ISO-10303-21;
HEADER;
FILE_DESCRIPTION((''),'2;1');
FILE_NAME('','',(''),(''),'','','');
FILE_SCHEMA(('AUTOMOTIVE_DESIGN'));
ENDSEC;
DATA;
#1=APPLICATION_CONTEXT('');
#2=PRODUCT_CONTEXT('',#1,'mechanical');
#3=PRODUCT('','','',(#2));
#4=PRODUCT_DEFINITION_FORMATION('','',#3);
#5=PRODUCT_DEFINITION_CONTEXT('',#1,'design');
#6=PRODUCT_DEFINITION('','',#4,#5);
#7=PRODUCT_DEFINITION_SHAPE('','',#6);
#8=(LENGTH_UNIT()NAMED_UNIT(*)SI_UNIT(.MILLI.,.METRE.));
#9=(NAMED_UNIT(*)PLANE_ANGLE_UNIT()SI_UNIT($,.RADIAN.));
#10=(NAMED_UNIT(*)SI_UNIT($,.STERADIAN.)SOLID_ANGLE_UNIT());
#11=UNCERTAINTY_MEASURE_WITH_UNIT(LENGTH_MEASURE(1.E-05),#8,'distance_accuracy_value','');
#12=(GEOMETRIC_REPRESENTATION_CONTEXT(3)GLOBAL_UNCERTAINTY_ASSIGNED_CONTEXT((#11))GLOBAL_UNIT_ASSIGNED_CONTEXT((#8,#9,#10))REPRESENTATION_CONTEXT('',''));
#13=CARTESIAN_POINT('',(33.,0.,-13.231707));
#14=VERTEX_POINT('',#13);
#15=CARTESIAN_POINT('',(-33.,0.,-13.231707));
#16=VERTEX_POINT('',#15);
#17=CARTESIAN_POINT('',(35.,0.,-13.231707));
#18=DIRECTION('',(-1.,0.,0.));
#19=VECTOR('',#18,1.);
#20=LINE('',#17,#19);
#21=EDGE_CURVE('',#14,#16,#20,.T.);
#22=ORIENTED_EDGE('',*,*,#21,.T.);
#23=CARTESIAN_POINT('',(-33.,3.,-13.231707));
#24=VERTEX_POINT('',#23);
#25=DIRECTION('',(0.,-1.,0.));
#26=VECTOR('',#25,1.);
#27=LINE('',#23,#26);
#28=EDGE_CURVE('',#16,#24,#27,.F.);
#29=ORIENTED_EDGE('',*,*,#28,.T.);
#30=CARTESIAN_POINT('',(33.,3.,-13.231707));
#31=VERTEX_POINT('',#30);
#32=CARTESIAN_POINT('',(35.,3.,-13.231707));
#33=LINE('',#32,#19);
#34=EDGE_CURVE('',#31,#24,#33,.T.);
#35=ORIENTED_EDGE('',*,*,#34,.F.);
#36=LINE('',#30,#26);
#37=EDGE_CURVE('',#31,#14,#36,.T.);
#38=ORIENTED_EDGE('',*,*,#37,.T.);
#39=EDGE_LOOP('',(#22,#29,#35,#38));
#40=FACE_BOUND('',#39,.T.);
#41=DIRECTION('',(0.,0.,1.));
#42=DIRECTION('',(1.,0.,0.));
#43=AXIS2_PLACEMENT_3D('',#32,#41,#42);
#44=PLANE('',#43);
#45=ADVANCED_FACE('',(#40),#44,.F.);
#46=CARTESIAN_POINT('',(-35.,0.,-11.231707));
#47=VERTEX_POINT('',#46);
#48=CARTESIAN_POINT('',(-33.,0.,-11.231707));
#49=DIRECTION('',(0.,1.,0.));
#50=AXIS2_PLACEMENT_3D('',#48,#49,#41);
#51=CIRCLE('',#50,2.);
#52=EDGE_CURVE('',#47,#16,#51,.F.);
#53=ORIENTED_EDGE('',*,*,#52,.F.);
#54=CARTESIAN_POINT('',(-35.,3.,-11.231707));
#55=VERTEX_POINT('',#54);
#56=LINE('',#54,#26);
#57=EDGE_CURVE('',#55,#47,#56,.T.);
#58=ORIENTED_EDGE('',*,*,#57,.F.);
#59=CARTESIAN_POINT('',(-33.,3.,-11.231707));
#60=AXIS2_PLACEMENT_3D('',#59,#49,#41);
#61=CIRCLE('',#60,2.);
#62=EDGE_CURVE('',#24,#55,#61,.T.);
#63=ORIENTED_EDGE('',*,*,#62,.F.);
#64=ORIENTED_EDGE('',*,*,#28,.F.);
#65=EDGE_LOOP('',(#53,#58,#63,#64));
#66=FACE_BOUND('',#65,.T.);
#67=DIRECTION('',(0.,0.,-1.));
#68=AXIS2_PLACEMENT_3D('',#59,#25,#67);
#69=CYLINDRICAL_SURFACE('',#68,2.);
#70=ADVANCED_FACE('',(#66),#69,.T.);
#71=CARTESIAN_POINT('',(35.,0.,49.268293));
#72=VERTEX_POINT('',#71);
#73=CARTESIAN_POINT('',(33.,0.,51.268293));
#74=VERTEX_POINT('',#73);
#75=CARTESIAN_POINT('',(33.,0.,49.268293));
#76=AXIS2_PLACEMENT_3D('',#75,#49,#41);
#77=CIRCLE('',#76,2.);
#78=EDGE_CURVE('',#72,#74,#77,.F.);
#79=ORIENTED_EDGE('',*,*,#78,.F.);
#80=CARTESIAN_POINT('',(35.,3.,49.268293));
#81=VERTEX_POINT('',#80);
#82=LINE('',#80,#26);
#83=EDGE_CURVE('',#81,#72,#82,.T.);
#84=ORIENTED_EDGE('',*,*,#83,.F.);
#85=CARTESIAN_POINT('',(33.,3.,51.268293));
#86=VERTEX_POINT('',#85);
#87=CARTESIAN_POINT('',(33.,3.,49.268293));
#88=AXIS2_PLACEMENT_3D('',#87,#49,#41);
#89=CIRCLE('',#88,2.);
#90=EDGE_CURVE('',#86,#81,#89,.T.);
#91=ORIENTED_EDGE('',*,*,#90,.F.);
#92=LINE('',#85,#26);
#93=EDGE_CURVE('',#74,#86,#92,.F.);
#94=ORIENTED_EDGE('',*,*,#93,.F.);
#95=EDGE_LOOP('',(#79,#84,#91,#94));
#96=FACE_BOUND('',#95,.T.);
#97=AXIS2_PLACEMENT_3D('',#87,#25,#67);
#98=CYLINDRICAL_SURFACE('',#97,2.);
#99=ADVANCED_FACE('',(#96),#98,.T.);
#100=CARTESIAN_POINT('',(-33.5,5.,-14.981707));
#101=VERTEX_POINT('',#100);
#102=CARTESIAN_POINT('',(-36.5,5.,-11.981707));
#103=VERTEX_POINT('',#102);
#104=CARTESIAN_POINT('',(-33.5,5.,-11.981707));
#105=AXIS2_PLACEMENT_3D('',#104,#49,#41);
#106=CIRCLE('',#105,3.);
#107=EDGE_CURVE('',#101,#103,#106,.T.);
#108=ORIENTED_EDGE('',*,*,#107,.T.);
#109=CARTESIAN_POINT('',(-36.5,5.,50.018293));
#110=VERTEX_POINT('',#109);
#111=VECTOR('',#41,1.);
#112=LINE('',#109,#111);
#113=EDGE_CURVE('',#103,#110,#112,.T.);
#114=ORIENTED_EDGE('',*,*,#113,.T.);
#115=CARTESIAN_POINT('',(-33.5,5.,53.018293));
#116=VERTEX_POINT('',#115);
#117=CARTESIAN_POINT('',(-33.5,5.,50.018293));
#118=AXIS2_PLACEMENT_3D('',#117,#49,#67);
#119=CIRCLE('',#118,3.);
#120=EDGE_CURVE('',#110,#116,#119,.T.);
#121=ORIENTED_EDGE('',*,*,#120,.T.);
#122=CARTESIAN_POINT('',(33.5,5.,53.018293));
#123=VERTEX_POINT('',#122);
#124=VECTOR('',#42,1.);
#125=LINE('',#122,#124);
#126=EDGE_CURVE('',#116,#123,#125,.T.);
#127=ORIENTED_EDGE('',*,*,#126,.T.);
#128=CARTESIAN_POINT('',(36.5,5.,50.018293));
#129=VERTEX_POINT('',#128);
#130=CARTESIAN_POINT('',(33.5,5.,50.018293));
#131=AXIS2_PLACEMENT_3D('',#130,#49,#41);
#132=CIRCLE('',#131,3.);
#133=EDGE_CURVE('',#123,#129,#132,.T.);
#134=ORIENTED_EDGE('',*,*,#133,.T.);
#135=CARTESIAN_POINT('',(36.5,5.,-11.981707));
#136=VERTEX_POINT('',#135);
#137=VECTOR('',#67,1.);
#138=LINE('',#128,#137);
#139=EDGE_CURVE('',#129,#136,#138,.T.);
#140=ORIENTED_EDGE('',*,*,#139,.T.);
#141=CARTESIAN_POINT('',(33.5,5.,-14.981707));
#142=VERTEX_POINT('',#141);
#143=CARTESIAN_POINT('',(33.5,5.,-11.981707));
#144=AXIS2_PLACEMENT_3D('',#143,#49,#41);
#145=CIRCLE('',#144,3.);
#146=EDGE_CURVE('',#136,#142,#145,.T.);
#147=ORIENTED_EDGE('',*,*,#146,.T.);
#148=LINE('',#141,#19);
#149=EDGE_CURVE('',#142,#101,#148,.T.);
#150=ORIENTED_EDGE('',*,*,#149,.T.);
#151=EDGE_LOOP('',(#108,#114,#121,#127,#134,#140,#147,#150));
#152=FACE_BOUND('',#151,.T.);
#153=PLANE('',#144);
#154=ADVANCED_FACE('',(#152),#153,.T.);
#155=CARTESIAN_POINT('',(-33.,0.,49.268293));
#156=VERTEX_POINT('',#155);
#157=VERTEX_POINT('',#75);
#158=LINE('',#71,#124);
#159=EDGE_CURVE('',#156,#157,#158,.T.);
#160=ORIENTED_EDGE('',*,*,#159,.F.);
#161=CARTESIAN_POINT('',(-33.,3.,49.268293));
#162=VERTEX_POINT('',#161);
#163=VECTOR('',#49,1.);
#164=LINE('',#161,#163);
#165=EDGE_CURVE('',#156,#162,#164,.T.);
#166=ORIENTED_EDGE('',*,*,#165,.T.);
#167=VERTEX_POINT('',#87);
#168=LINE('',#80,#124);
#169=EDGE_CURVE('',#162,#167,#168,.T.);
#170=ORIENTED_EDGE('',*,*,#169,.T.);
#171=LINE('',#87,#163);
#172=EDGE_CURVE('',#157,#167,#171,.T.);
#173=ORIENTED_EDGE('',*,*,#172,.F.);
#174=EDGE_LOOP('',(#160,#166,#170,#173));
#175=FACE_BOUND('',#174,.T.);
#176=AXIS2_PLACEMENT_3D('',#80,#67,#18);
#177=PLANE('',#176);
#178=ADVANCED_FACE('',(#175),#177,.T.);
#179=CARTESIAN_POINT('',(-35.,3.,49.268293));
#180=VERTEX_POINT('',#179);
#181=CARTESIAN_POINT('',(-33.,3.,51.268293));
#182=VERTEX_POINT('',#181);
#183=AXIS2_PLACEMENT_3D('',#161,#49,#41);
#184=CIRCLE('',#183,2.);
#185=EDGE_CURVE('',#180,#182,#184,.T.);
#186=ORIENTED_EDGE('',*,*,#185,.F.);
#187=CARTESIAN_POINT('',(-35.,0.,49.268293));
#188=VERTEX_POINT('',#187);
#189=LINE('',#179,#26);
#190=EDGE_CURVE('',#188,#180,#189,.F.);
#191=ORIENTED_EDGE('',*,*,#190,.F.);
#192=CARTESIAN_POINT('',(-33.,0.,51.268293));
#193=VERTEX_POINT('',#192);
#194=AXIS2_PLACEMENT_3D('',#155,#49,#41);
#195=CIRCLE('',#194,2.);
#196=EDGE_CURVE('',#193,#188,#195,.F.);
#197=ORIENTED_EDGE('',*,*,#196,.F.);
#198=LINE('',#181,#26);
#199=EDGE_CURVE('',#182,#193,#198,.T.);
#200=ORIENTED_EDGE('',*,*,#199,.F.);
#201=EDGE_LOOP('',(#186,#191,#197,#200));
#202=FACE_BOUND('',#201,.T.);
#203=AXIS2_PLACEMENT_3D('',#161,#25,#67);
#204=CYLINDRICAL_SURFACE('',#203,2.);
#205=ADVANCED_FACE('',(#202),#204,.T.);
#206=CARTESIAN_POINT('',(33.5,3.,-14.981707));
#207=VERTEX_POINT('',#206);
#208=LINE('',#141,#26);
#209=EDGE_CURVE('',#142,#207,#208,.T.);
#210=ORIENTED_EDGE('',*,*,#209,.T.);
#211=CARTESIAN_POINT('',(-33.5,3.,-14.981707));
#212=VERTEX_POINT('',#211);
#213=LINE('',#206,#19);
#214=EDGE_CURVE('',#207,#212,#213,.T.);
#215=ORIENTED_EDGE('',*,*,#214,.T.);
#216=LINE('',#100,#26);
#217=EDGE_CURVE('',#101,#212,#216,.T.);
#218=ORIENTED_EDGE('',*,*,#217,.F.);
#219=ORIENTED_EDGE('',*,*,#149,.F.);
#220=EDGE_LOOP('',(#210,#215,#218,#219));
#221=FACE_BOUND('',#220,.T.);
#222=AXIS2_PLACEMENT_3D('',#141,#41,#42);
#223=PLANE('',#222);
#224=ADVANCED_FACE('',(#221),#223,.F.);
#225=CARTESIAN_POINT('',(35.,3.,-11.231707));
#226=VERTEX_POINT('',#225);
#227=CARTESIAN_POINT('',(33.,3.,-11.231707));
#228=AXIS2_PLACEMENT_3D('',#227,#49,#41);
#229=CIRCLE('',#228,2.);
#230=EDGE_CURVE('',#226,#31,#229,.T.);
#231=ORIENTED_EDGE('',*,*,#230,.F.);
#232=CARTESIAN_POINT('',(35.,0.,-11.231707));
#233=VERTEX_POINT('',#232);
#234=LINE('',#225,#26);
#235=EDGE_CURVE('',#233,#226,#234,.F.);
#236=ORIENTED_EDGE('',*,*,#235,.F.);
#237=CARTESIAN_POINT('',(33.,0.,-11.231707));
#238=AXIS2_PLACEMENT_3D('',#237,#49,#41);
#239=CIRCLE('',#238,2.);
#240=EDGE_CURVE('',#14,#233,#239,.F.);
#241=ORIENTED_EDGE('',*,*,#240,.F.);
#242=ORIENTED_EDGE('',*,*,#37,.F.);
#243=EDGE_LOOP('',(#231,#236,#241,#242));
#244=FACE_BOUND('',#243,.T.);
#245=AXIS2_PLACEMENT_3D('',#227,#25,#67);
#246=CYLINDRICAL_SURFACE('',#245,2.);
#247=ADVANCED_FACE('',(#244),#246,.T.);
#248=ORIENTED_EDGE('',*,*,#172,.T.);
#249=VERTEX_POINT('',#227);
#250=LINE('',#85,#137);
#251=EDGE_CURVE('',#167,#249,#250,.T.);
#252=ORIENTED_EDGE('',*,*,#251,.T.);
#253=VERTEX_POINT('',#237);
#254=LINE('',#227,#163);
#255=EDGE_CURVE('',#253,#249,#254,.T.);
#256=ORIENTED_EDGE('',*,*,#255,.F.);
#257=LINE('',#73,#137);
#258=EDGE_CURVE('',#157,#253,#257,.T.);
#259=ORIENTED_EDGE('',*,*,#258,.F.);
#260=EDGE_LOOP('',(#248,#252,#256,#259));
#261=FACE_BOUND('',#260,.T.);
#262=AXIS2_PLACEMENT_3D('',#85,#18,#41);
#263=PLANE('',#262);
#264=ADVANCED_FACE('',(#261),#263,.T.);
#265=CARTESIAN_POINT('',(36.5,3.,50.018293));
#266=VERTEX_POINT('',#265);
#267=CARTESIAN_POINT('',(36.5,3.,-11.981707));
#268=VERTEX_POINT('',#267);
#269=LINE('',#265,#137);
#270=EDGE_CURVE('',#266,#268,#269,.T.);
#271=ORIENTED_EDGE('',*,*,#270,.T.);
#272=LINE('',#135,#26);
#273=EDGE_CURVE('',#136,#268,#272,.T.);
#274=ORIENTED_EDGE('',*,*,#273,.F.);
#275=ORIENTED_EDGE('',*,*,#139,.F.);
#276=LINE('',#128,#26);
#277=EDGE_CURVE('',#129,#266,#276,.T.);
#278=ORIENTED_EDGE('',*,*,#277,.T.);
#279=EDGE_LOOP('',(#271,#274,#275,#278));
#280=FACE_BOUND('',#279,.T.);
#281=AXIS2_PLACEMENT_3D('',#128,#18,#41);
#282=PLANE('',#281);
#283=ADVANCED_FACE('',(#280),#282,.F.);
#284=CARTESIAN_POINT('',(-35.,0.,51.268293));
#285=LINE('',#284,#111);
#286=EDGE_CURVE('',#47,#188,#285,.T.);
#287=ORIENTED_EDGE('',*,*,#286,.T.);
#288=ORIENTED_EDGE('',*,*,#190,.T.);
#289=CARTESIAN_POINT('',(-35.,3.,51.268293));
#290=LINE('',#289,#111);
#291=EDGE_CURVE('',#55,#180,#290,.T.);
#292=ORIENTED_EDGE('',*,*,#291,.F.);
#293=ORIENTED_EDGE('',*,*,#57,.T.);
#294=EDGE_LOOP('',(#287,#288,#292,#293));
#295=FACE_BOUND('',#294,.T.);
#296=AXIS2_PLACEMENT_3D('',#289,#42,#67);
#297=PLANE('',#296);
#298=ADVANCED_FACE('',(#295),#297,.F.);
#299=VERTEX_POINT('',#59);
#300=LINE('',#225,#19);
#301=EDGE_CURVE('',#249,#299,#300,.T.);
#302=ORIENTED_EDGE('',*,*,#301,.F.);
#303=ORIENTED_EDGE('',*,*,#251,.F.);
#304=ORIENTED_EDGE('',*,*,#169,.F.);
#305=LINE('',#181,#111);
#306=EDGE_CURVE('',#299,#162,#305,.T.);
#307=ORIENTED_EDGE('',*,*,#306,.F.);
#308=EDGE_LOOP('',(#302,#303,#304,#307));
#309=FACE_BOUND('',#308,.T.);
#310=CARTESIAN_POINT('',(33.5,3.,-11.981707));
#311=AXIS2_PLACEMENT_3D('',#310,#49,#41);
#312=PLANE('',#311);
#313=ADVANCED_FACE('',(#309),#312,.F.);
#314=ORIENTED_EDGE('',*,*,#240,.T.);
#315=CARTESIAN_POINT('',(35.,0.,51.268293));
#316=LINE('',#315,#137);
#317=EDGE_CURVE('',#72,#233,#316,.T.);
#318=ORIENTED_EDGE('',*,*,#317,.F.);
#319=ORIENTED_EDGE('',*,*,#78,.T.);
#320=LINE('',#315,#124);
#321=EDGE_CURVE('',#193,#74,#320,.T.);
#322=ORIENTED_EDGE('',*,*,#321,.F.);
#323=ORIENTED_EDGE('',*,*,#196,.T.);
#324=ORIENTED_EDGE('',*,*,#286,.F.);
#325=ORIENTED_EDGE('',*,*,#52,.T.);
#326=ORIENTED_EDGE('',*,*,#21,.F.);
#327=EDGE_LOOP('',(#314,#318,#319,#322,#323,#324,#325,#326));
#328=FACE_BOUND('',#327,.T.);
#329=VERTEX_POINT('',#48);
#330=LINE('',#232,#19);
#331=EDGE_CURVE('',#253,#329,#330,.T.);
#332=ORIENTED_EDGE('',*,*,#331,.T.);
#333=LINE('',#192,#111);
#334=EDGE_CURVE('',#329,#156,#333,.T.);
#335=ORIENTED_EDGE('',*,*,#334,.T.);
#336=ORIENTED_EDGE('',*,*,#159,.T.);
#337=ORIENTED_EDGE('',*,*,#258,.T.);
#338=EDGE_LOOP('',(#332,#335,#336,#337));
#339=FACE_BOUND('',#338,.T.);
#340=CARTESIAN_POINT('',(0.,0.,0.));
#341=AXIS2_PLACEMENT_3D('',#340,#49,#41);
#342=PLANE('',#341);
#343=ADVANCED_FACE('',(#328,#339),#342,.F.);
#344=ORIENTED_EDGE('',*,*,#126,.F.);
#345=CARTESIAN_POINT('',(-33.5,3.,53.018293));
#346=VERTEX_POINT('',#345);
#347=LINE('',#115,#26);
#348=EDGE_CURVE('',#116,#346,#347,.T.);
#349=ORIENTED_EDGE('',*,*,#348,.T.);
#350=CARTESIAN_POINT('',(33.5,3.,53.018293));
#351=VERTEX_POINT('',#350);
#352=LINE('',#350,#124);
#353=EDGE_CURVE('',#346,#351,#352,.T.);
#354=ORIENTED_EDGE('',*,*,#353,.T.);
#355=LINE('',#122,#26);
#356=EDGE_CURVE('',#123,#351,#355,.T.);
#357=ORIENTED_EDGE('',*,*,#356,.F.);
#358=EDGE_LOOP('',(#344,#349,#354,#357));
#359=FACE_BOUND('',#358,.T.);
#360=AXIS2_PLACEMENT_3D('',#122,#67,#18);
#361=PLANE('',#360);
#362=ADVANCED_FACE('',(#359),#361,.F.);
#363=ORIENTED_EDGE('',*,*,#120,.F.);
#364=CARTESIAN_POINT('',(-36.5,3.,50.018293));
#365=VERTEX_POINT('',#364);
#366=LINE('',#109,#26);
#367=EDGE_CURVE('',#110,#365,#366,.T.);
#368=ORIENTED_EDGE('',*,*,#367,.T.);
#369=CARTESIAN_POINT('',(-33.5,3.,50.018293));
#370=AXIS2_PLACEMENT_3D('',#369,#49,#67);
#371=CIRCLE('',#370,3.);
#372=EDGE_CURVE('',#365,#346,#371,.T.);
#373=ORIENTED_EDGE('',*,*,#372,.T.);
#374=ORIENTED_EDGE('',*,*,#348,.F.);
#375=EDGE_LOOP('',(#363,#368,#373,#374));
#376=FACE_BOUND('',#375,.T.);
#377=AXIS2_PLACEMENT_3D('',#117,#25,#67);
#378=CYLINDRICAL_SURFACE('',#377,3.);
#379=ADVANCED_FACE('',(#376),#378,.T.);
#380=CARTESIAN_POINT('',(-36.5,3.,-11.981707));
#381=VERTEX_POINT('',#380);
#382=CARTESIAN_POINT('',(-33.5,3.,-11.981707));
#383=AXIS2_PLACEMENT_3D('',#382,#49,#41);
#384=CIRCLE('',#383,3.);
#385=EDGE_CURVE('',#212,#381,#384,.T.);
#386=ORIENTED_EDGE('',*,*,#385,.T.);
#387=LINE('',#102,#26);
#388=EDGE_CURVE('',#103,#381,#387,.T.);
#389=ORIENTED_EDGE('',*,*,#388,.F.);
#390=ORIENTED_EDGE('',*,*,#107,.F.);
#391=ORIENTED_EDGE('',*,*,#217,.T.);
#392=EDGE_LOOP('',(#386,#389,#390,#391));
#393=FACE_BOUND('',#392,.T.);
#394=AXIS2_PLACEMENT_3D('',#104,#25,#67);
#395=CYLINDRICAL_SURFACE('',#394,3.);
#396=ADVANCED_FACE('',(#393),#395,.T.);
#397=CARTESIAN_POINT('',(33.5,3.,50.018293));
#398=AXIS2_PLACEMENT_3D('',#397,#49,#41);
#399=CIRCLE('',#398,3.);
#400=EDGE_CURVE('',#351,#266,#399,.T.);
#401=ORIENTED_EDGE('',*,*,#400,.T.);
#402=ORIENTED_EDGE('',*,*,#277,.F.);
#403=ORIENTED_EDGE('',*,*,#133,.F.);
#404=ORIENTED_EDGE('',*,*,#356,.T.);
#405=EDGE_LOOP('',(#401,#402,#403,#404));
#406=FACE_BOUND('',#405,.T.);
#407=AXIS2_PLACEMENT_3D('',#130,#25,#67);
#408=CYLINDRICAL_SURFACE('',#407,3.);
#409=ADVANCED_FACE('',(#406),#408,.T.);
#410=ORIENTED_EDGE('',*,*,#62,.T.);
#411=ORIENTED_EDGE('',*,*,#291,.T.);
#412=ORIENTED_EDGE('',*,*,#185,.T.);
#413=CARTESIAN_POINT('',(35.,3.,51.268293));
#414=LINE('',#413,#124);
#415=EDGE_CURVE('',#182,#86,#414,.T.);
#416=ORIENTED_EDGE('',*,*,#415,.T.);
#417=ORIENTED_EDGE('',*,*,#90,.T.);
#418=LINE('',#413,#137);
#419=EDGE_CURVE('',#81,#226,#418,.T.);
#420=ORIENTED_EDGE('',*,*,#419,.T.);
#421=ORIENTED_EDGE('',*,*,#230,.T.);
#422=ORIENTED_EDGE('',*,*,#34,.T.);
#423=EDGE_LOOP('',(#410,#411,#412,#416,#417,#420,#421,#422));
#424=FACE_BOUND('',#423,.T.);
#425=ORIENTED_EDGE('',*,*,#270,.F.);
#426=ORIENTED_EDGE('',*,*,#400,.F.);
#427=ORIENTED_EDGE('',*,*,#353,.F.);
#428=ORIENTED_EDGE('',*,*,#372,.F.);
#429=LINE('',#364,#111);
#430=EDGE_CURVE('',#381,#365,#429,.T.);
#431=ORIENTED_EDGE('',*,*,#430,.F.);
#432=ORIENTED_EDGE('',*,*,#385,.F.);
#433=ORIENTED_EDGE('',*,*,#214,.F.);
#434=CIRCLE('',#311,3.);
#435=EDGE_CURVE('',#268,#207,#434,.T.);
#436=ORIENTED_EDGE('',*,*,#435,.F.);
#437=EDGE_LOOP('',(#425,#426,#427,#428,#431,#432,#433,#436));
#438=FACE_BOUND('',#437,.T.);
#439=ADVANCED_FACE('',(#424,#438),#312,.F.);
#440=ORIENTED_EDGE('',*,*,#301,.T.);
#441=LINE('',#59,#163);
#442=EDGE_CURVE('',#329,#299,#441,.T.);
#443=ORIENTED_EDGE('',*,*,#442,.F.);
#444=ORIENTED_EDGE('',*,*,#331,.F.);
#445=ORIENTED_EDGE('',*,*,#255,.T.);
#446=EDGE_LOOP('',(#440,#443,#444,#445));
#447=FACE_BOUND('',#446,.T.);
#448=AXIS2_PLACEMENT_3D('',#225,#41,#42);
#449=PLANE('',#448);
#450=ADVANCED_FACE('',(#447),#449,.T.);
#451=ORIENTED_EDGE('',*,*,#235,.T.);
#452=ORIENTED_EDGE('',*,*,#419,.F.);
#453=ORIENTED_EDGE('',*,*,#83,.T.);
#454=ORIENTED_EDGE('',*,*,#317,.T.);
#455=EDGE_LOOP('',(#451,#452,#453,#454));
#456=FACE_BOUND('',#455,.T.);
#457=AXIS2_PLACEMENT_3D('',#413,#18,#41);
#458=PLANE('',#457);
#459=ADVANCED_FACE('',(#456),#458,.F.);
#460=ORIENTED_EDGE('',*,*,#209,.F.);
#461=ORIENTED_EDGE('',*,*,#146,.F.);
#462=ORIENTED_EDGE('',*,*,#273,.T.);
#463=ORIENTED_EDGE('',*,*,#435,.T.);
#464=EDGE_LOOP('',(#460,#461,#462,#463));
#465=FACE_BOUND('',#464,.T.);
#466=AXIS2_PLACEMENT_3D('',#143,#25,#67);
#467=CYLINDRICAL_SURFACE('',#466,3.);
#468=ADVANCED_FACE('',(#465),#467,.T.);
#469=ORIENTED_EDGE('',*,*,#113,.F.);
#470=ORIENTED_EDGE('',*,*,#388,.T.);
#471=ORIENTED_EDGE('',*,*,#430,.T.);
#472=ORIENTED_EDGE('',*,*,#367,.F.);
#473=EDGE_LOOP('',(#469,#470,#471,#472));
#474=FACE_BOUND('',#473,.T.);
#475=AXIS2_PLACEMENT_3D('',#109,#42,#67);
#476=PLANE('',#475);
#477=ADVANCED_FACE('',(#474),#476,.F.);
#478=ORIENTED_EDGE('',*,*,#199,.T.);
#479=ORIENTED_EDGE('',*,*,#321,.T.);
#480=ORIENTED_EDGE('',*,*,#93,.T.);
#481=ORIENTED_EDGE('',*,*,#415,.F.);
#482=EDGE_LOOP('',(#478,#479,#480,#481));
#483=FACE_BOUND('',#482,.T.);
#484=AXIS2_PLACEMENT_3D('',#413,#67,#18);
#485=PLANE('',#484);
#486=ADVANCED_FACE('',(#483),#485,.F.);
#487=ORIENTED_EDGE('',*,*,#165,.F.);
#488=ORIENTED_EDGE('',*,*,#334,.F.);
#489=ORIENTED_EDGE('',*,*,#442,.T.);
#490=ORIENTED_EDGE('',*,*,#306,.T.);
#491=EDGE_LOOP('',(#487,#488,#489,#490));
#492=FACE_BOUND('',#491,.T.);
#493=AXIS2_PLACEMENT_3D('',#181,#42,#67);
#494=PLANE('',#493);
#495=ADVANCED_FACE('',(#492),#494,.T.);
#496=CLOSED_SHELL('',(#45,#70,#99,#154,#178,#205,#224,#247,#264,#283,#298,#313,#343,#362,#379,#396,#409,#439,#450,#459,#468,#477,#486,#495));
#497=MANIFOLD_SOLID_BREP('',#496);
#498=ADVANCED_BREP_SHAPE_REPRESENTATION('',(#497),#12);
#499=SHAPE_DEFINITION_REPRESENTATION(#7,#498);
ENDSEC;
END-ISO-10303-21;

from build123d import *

# Parameters (mm, degrees)
CROQUIS1_W              = 70
CROQUIS1_H              = 64.5
SALIENTE_EXTRUIR1_DEPTH = 3
REDONDEO1_R             = 2
VACIADO2_START          = -33
VACIADO2_OUTLINE_W      = 3
VACIADO2_OUTLINE_H      = 60.5
VACIADO2_DEPTH          = 66
SALIENTE_EXTRUIR2_DEPTH = 2


# Read off the part's stored shape, not the designer's step: Vaciado2
with BuildPart() as part:
    # Croquis1 → Saliente-Extruir1 (new body)
    with BuildSketch(Plane(origin=(0, 0, 0), x_dir=(1, 0, 0), z_dir=(0, 1, 0))):
        with Locations((0, -19.018292683)):
            Rectangle(CROQUIS1_W, CROQUIS1_H)
    extrude(amount=SALIENTE_EXTRUIR1_DEPTH)

    # Redondeo1
    redondeo1_edges = [part.edges().sort_by_distance(p)[0] for p in [
        (-35, 1.5, -13.231707317),
        (35, 1.5, -13.231707317),
        (35, 1.5, 51.268292683),
        (-35, 1.5, 51.268292683),
    ]]
    fillet(redondeo1_edges, radius=REDONDEO1_R)

    # Vaciado2 outline → Vaciado2 (cut)
    with BuildSketch(Plane.YZ.offset(VACIADO2_START)):
        with Locations((1.5, 19.018292683)):
            Rectangle(VACIADO2_OUTLINE_W, VACIADO2_OUTLINE_H)
    extrude(amount=VACIADO2_DEPTH, mode=Mode.SUBTRACT)

    # Croquis4 → Saliente-Extruir2 (add)
    with BuildSketch(Plane(origin=(0, 3, 0), x_dir=(1, 0, 0), z_dir=(0, 1, 0))):
        with BuildLine():
            Line((33.5, -53.018292683), (-33.5, -53.018292683))
            ThreePointArc((-33.5, -53.018292683), (-35.621320344, -52.139613026), (-36.5, -50.018292683))
            Line((-36.5, -50.018292683), (-36.5, 11.981707317))
            ThreePointArc((-36.5, 11.981707317), (-35.621320344, 14.103027661), (-33.5, 14.981707317))
            Line((-33.5, 14.981707317), (33.5, 14.981707317))
            ThreePointArc((33.5, 14.981707317), (35.621320344, 14.103027661), (36.5, 11.981707317))
            Line((36.5, 11.981707317), (36.5, -50.018292683))
            ThreePointArc((36.5, -50.018292683), (35.621320344, -52.139613026), (33.5, -53.018292683))
        make_face()
    extrude(amount=SALIENTE_EXTRUIR2_DEPTH)


solid = part.part
